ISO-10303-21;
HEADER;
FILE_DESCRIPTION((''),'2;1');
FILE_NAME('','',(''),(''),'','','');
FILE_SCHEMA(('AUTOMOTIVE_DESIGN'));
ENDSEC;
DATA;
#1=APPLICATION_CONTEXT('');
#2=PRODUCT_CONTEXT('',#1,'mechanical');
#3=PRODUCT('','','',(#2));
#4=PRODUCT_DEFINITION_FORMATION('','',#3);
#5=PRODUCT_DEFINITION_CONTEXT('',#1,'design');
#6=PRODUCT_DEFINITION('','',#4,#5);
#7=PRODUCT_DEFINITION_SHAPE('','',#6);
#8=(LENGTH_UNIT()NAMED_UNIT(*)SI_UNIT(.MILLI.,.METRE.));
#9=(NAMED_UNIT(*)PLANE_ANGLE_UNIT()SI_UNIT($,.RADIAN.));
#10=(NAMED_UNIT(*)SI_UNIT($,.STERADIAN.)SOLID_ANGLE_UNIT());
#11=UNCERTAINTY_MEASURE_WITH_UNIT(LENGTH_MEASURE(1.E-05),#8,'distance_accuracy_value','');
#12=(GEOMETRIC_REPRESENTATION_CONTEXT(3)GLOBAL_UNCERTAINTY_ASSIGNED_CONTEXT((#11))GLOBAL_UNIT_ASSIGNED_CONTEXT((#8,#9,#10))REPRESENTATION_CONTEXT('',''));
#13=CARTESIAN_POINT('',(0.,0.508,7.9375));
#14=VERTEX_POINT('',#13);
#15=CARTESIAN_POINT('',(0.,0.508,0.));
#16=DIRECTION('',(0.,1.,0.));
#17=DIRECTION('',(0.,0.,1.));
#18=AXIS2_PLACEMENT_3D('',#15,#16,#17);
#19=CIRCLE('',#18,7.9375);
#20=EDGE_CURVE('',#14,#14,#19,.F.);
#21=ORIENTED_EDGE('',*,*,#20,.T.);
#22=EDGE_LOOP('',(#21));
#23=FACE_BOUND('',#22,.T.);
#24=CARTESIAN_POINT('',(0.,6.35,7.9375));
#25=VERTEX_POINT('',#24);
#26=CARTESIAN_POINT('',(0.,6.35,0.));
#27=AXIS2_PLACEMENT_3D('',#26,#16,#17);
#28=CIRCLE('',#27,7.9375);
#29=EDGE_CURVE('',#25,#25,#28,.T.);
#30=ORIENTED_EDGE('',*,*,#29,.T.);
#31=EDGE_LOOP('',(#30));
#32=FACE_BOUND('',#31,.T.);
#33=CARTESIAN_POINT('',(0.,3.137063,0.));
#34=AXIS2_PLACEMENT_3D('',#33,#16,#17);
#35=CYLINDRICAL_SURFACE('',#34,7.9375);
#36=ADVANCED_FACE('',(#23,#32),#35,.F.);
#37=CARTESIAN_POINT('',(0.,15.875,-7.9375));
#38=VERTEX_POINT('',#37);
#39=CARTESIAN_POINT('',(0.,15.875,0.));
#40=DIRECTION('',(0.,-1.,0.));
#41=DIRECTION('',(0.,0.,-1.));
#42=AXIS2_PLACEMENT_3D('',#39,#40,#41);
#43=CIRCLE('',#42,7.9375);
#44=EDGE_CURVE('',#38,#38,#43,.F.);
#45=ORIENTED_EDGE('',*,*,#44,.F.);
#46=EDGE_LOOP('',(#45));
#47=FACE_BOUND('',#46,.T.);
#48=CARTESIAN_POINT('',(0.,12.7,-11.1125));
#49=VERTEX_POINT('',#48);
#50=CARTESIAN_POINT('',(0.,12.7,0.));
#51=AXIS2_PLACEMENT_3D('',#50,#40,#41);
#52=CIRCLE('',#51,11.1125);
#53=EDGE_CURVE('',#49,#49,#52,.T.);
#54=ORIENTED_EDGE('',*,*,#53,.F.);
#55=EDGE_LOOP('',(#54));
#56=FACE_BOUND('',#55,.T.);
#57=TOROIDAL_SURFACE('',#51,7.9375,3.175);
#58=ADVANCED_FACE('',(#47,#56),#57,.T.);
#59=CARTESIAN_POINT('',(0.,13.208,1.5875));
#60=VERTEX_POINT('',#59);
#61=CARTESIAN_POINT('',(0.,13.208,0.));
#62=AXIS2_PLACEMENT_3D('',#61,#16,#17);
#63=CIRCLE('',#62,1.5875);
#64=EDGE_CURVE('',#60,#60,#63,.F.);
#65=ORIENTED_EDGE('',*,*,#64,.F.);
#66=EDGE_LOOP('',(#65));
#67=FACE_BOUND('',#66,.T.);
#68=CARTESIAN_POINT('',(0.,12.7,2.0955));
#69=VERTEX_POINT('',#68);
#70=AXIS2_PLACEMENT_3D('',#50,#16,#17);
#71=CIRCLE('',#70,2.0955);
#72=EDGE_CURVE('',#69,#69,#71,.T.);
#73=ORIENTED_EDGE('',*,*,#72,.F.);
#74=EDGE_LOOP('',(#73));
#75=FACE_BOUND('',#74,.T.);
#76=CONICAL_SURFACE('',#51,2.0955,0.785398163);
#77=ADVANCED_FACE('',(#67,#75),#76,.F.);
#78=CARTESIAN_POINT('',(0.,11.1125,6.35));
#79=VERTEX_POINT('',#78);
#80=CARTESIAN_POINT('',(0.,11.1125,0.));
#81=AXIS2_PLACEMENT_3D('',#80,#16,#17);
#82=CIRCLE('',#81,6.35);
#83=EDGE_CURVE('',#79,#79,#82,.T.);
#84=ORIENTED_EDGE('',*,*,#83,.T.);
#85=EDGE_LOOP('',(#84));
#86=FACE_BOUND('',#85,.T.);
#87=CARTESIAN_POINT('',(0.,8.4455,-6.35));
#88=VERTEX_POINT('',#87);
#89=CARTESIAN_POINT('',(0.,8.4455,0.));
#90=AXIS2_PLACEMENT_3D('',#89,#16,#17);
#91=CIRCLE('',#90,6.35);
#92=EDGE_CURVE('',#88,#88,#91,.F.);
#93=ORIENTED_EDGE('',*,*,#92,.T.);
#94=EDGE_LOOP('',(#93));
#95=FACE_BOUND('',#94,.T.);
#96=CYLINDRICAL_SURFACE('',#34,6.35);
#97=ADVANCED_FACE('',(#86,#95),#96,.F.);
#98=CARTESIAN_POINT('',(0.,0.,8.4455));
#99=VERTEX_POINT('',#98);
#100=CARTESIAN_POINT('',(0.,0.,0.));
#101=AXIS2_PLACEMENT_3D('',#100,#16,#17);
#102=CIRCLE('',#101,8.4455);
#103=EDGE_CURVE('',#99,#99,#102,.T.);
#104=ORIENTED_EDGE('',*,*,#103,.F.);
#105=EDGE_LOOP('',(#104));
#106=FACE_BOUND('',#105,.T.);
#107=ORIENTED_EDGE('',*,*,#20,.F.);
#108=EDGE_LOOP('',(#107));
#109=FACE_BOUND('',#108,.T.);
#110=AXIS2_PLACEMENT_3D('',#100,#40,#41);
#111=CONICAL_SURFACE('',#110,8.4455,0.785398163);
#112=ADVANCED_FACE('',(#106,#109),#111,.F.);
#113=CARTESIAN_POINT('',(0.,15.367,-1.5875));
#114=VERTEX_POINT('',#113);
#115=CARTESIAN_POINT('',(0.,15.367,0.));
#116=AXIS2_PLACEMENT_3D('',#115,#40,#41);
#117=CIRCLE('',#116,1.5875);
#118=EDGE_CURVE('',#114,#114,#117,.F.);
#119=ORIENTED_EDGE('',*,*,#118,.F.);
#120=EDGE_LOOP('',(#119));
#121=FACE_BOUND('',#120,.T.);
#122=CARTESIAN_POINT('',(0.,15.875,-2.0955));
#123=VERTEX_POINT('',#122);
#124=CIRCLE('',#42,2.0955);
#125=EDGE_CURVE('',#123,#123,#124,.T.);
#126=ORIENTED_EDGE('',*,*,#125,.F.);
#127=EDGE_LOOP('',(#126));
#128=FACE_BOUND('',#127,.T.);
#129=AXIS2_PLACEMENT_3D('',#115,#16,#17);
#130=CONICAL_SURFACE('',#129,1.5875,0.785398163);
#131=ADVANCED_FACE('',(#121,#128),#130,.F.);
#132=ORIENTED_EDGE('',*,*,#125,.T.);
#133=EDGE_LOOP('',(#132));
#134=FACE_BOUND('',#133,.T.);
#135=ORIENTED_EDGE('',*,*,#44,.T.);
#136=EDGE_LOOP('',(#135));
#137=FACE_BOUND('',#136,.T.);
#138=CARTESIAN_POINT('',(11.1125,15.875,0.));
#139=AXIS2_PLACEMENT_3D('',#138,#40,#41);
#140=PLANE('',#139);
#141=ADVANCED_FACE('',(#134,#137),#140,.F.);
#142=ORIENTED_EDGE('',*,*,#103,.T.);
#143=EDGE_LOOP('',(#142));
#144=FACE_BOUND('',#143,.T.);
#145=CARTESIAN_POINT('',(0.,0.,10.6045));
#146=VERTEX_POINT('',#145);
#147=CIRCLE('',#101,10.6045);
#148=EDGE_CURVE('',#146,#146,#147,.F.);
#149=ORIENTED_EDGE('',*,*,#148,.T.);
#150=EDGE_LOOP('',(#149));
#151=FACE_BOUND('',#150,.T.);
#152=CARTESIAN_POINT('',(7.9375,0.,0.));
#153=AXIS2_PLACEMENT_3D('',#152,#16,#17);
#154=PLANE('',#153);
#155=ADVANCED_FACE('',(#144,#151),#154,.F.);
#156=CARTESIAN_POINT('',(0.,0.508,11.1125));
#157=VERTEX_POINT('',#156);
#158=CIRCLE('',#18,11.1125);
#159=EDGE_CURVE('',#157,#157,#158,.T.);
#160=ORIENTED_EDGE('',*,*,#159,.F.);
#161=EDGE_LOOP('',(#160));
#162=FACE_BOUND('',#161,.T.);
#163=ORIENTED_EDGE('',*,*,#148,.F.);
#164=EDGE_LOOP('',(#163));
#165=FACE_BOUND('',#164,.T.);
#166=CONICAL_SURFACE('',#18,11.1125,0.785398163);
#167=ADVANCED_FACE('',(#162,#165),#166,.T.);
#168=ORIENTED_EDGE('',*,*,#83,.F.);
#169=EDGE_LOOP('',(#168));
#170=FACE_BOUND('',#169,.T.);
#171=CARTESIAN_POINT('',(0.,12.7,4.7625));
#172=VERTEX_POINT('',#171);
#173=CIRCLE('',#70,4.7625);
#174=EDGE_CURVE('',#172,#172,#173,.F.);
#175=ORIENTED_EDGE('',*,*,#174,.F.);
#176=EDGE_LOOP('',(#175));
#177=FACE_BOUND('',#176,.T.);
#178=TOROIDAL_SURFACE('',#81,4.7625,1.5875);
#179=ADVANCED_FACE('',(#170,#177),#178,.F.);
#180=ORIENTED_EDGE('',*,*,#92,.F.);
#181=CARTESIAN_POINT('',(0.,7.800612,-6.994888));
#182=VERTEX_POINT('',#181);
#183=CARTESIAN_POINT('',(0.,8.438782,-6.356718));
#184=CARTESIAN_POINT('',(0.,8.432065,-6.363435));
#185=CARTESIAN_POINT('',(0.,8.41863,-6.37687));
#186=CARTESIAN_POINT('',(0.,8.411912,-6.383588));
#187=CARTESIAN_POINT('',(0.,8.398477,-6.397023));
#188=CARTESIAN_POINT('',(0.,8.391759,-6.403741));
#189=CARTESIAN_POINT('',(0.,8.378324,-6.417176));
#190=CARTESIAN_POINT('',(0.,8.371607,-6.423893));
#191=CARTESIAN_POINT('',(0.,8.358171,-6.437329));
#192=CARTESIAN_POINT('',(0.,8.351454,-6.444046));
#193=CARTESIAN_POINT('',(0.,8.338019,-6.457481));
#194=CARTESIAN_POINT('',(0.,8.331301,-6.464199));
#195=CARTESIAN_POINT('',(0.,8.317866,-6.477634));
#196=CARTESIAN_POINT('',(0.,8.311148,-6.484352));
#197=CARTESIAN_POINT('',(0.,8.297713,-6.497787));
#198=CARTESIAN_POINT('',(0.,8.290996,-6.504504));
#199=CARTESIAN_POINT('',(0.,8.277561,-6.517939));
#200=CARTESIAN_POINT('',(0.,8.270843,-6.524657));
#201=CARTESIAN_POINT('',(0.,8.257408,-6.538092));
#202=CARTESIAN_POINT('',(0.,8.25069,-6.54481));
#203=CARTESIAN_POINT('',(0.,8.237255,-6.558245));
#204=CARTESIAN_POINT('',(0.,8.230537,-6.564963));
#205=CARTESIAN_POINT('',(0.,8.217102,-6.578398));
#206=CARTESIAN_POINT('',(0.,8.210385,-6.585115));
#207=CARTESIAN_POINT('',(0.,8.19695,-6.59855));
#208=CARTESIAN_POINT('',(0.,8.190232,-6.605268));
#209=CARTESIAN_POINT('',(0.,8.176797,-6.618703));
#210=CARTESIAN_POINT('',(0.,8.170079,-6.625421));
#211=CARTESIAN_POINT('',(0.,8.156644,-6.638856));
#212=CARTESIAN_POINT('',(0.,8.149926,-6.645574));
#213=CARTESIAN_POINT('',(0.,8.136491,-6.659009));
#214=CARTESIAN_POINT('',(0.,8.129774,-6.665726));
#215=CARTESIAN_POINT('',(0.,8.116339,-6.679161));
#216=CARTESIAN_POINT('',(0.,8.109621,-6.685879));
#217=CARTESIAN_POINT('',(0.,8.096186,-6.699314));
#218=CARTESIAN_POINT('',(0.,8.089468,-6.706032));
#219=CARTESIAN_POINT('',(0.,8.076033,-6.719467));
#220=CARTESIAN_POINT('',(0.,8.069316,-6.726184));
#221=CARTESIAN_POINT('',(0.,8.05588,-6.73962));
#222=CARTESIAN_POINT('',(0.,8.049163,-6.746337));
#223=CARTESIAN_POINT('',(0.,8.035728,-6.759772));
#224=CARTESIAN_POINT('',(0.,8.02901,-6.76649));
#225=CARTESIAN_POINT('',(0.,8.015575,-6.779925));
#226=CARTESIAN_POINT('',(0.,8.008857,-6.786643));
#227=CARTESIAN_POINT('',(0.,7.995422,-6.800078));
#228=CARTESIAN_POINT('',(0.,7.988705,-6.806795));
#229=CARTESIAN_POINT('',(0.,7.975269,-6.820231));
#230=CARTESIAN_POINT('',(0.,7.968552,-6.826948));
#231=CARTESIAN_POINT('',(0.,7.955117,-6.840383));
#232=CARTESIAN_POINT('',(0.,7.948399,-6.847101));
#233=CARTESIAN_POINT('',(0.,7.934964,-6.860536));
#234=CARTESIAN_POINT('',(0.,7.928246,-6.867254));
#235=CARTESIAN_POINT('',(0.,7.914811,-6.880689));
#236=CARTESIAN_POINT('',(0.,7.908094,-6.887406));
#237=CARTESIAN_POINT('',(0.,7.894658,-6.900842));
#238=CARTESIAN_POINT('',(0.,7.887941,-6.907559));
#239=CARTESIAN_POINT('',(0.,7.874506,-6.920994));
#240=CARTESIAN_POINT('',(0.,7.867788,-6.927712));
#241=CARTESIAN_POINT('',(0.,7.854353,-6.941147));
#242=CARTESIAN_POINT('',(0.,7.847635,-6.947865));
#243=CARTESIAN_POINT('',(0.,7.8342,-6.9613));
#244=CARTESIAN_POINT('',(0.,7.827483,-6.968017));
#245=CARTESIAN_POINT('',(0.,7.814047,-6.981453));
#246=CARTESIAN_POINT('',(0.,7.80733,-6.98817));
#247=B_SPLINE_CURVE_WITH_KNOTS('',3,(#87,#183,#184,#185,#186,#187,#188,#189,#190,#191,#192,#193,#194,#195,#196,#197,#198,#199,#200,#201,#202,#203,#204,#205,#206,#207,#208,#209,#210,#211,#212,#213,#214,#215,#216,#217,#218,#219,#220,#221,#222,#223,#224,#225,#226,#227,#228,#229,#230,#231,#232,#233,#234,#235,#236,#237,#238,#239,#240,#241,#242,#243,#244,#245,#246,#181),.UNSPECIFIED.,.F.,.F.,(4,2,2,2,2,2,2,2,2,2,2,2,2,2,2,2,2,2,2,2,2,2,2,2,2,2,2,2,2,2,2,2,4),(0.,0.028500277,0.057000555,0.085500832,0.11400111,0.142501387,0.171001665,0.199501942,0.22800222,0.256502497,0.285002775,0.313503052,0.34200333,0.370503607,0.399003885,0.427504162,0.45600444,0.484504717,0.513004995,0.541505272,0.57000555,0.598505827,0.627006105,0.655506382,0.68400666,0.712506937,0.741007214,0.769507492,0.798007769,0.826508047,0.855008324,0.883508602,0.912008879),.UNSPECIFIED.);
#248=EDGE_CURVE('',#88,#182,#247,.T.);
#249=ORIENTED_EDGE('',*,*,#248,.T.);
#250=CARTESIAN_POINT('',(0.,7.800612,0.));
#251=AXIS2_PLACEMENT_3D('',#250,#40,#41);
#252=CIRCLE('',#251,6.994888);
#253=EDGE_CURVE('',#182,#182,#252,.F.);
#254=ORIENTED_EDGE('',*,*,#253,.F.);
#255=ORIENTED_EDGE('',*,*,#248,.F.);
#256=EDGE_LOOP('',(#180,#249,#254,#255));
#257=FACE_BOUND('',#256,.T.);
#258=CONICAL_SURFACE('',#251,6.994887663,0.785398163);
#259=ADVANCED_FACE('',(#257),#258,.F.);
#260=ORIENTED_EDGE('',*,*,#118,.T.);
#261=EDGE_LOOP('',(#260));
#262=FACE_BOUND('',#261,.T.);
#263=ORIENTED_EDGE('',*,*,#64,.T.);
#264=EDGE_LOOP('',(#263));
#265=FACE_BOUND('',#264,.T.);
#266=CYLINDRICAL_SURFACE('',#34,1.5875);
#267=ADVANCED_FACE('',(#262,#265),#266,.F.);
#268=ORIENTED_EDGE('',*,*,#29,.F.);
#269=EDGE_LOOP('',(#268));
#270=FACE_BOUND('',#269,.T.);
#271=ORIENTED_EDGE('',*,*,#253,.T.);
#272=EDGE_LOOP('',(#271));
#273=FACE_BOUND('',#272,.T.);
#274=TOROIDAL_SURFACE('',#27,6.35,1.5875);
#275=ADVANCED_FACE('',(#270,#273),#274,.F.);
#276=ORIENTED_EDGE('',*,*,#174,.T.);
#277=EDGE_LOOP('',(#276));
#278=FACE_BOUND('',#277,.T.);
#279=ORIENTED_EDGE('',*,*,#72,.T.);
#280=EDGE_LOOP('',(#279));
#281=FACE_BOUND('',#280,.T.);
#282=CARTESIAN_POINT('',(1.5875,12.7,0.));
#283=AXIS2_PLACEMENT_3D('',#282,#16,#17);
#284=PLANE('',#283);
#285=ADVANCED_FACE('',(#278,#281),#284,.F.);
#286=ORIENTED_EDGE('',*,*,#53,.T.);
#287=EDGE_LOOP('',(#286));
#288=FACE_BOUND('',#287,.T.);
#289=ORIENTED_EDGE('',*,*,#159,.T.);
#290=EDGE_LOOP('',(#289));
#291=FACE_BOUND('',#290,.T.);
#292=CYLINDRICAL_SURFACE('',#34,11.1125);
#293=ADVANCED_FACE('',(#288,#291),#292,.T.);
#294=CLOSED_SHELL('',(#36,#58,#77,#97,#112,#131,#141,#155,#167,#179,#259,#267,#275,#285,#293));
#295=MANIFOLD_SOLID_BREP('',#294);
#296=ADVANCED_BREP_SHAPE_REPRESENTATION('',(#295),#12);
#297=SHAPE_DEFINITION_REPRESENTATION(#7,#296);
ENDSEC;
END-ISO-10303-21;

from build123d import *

# Parameters (mm, degrees)
FILLET1_R = 1.5875
FILLET2_R = 3.175


with BuildPart() as part:
    # Sketch1 → Revolve1 (revolve)
    with BuildSketch(Plane.XY, mode=Mode.PRIVATE) as revolve1_sk:
        Polygon((1.5875, 15.875), (1.5875, 12.7), (6.35, 12.7), (6.35, 7.9375), (7.9375, 7.9375), (7.9375, 0), (11.1125, 0), (11.1125, 15.875), align=None)
    revolve(revolve1_sk.sketch.rotate(Axis((0, 3.137063419, 0), (0, -1, 0)), 90), axis=Axis((0, 3.137063419, 0), (0, -1, 0)))

    # Fillet1
    fillet1_edges = [part.edges().sort_by_distance(p)[0] for p in [
        (0, 7.9375, -7.9375),
        (0, 12.7, -6.35),
    ]]
    fillet(fillet1_edges, radius=FILLET1_R - 0.0001)  # a hair under: the kernel refuses the full size

    # Fillet2
    fillet2_edges = [part.edges().sort_by_distance(p)[0] for p in [
        (0, 15.875, -11.1125),
    ]]
    fillet(fillet2_edges, radius=FILLET2_R)

    # Chamfer1: read off the stored shape, not the designer's step
    # Chamfer1 outline → Chamfer1 (revolve, cut)
    with BuildSketch(Plane.XY):
        Polygon((1.5875, 15.875), (1.5875, 15.367), (2.0955, 15.875), align=None)
        Polygon((2.0955, 12.7), (1.5875, 13.208), (1.5875, 12.7), align=None)
        Polygon((6.994887663, 7.800612337), (6.35, 8.4455), (6.35, 7.800612337), align=None)
        Polygon((8.4455, 0), (7.9375, 0.508), (7.9375, 0), align=None)
        Polygon((11.1125, 0.508), (10.6045, 0), (11.1125, 0), align=None)
    revolve(axis=Axis((0, 0, 0), (0, 1, 0)), mode=Mode.SUBTRACT)


solid = part.part
